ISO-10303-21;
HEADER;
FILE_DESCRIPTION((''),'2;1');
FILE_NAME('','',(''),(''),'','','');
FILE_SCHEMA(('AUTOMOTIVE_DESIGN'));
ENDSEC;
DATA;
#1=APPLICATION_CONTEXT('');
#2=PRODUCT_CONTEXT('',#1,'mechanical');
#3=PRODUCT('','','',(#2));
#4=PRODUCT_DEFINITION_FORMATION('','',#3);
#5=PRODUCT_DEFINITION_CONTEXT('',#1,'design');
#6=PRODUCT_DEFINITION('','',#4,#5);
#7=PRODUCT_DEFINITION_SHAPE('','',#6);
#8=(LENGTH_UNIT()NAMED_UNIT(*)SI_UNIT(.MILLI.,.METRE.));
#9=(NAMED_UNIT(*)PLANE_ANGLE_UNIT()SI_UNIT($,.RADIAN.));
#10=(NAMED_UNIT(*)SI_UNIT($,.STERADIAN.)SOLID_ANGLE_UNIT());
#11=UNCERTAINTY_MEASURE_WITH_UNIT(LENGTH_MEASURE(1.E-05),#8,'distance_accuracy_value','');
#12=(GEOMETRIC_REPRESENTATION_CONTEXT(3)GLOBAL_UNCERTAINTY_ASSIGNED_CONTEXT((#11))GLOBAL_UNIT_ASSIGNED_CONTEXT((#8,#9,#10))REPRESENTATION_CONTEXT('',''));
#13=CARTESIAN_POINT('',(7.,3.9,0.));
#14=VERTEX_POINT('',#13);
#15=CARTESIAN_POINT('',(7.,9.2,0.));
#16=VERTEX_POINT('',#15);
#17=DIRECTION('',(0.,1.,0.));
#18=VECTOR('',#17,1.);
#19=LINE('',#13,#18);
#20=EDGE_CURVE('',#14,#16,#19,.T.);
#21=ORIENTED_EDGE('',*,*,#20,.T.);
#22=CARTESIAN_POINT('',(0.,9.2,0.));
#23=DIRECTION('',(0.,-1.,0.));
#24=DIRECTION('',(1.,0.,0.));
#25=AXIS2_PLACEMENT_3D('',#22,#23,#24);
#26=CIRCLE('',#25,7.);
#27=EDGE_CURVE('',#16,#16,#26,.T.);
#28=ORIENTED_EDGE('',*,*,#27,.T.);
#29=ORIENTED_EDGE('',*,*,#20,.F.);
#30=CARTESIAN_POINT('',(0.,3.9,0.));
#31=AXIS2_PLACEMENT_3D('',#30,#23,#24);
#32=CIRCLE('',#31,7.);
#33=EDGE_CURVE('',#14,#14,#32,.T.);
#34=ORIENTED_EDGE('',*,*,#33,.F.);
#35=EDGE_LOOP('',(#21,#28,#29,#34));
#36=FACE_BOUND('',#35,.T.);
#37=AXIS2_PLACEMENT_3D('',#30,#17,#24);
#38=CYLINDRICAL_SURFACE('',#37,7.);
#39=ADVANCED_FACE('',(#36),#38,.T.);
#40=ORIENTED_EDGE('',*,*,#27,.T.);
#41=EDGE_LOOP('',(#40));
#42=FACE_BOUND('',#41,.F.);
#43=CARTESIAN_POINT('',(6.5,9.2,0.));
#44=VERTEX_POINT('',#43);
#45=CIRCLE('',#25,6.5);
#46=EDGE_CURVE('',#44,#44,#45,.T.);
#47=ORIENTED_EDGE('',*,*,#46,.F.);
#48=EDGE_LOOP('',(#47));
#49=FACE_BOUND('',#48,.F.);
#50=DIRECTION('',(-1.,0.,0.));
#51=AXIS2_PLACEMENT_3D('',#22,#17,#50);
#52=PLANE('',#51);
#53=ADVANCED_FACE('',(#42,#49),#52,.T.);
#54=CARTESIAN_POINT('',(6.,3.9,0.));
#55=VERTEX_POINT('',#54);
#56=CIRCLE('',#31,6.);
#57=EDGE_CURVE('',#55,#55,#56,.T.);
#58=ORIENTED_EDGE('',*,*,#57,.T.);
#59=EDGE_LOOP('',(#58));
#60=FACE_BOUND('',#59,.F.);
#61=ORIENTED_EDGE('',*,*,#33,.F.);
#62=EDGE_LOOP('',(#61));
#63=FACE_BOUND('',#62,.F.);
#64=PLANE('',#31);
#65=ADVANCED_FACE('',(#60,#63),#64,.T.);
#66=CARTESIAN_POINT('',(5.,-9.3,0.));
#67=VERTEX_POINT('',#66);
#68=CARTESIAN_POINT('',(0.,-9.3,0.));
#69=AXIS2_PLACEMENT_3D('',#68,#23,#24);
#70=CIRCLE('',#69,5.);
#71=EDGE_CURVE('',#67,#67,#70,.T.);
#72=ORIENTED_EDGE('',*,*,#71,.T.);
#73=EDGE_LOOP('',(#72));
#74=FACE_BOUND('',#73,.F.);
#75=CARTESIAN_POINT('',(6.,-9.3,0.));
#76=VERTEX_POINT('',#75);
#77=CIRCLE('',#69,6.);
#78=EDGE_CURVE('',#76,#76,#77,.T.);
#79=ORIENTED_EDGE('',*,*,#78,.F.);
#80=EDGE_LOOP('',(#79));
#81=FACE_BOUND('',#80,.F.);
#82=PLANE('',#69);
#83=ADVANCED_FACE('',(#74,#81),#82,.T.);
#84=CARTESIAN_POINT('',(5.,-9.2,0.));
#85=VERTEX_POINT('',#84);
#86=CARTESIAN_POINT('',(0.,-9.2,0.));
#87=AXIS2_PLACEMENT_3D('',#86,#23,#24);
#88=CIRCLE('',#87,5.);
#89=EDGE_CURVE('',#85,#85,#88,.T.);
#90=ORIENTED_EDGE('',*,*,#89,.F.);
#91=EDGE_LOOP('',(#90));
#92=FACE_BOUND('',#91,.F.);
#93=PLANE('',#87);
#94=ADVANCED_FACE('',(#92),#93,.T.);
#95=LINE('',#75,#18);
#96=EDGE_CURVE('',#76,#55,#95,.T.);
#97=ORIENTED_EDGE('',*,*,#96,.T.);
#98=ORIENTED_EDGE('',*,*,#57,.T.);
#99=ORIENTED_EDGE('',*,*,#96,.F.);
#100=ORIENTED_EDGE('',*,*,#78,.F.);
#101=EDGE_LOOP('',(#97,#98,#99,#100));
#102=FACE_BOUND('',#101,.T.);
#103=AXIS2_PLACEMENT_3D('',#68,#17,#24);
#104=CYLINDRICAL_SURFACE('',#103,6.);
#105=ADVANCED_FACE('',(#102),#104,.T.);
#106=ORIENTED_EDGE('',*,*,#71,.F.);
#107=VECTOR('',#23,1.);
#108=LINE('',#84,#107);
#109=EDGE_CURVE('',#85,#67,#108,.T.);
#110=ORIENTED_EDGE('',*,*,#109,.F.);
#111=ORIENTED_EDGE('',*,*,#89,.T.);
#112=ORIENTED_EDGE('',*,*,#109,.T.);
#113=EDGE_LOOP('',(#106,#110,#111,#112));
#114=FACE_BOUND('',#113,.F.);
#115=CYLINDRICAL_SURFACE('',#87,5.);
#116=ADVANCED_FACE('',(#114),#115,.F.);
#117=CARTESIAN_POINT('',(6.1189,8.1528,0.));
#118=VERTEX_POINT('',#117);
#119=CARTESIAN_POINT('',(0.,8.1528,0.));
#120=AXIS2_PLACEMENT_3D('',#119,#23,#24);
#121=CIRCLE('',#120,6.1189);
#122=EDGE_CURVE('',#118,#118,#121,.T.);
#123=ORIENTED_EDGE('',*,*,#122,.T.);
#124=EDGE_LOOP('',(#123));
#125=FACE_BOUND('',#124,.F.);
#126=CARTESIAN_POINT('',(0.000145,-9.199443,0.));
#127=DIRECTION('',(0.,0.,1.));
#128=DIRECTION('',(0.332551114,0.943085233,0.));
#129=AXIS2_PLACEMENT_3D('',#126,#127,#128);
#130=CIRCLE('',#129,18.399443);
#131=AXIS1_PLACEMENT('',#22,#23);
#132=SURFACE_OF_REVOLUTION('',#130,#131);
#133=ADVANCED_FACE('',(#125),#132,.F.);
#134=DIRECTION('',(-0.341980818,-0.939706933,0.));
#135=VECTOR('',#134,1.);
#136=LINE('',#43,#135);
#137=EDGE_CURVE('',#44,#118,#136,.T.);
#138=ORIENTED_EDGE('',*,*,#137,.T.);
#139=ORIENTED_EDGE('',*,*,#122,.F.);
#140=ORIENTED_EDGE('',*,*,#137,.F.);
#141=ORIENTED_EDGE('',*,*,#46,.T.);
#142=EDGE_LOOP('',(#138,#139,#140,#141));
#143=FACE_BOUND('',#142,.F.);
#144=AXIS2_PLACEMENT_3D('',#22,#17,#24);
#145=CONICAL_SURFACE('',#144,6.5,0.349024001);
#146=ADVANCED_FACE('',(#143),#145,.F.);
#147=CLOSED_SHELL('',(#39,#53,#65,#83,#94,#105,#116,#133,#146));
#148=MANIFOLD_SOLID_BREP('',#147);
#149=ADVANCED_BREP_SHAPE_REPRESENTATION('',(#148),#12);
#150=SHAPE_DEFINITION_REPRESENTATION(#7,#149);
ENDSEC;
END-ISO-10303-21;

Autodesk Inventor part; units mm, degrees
ref_plane "YZ Plane" through (0, 0, 0) normal (1, 0, 0) x (0, 1, 0)
ref_plane "XZ Plane" through (0, 0, 0) normal (0, 1, 0) x (-1, 0, 0)
ref_plane "XY Plane" through (0, 0, 0) normal (0, 0, 1) x (1, 0, 0)
sketch "Sketch1" plane through (0, 0, 0) normal (0, 0, 1) x (1, 0, 0)
  line L0 (0, 9.2) -> (0, -9.2)
  line L1 (6, -9.3) -> (6, 3.9)
  line L2 (6, 3.9) -> (7, 3.9)
  line L3 (7, 3.9) -> (7, 9.2)
  line L4 (7, 9.2) -> (6.5, 9.2)
  line L5 (6.5, 9.2) -> (6.1189, 8.1528)
  arc A0 (6.1189, 8.1528) -> (0, 9.2) centre (0, -9.2) ccw
  line L6 (0, -11.7) -> (6, -11.7)
  line L7 (0, -9.2) -> (5, -9.2)
  line L8 (5, -9.2) -> (5, -9.3)
  line L9 (5, -9.3) -> (6, -9.3)
  point P0 (0, 0)
  point P1 (0, 0)
  dimension "d0" = 20.9
  dimension "d2" = 12
  dimension "d3" = 14
  dimension "d4" = 5.3
  dimension "d5" = 0.5
  dimension "d6" = 110
  dimension "d11" = 10
  dimension "d12" = 2.4
  dimension "d13" = 0.1
revolve "Revolution1" add sketch "Sketch1" angle 360 about axis through (0, 9.2, 0) along (0, -1, 0)
surface revolve "RevolutionSrf1" sketch "Sketch1" angle 360 about axis through (0, 9.2, 0) along (0, -1, 0) shown yes curves L6
thread "Thread1" size "M12x0.5" class "6g" standard "ANSI Metric M Profile" full length
properties part number "Lens_M12_2.97mm-f4.0" material "ABS Plastic"
